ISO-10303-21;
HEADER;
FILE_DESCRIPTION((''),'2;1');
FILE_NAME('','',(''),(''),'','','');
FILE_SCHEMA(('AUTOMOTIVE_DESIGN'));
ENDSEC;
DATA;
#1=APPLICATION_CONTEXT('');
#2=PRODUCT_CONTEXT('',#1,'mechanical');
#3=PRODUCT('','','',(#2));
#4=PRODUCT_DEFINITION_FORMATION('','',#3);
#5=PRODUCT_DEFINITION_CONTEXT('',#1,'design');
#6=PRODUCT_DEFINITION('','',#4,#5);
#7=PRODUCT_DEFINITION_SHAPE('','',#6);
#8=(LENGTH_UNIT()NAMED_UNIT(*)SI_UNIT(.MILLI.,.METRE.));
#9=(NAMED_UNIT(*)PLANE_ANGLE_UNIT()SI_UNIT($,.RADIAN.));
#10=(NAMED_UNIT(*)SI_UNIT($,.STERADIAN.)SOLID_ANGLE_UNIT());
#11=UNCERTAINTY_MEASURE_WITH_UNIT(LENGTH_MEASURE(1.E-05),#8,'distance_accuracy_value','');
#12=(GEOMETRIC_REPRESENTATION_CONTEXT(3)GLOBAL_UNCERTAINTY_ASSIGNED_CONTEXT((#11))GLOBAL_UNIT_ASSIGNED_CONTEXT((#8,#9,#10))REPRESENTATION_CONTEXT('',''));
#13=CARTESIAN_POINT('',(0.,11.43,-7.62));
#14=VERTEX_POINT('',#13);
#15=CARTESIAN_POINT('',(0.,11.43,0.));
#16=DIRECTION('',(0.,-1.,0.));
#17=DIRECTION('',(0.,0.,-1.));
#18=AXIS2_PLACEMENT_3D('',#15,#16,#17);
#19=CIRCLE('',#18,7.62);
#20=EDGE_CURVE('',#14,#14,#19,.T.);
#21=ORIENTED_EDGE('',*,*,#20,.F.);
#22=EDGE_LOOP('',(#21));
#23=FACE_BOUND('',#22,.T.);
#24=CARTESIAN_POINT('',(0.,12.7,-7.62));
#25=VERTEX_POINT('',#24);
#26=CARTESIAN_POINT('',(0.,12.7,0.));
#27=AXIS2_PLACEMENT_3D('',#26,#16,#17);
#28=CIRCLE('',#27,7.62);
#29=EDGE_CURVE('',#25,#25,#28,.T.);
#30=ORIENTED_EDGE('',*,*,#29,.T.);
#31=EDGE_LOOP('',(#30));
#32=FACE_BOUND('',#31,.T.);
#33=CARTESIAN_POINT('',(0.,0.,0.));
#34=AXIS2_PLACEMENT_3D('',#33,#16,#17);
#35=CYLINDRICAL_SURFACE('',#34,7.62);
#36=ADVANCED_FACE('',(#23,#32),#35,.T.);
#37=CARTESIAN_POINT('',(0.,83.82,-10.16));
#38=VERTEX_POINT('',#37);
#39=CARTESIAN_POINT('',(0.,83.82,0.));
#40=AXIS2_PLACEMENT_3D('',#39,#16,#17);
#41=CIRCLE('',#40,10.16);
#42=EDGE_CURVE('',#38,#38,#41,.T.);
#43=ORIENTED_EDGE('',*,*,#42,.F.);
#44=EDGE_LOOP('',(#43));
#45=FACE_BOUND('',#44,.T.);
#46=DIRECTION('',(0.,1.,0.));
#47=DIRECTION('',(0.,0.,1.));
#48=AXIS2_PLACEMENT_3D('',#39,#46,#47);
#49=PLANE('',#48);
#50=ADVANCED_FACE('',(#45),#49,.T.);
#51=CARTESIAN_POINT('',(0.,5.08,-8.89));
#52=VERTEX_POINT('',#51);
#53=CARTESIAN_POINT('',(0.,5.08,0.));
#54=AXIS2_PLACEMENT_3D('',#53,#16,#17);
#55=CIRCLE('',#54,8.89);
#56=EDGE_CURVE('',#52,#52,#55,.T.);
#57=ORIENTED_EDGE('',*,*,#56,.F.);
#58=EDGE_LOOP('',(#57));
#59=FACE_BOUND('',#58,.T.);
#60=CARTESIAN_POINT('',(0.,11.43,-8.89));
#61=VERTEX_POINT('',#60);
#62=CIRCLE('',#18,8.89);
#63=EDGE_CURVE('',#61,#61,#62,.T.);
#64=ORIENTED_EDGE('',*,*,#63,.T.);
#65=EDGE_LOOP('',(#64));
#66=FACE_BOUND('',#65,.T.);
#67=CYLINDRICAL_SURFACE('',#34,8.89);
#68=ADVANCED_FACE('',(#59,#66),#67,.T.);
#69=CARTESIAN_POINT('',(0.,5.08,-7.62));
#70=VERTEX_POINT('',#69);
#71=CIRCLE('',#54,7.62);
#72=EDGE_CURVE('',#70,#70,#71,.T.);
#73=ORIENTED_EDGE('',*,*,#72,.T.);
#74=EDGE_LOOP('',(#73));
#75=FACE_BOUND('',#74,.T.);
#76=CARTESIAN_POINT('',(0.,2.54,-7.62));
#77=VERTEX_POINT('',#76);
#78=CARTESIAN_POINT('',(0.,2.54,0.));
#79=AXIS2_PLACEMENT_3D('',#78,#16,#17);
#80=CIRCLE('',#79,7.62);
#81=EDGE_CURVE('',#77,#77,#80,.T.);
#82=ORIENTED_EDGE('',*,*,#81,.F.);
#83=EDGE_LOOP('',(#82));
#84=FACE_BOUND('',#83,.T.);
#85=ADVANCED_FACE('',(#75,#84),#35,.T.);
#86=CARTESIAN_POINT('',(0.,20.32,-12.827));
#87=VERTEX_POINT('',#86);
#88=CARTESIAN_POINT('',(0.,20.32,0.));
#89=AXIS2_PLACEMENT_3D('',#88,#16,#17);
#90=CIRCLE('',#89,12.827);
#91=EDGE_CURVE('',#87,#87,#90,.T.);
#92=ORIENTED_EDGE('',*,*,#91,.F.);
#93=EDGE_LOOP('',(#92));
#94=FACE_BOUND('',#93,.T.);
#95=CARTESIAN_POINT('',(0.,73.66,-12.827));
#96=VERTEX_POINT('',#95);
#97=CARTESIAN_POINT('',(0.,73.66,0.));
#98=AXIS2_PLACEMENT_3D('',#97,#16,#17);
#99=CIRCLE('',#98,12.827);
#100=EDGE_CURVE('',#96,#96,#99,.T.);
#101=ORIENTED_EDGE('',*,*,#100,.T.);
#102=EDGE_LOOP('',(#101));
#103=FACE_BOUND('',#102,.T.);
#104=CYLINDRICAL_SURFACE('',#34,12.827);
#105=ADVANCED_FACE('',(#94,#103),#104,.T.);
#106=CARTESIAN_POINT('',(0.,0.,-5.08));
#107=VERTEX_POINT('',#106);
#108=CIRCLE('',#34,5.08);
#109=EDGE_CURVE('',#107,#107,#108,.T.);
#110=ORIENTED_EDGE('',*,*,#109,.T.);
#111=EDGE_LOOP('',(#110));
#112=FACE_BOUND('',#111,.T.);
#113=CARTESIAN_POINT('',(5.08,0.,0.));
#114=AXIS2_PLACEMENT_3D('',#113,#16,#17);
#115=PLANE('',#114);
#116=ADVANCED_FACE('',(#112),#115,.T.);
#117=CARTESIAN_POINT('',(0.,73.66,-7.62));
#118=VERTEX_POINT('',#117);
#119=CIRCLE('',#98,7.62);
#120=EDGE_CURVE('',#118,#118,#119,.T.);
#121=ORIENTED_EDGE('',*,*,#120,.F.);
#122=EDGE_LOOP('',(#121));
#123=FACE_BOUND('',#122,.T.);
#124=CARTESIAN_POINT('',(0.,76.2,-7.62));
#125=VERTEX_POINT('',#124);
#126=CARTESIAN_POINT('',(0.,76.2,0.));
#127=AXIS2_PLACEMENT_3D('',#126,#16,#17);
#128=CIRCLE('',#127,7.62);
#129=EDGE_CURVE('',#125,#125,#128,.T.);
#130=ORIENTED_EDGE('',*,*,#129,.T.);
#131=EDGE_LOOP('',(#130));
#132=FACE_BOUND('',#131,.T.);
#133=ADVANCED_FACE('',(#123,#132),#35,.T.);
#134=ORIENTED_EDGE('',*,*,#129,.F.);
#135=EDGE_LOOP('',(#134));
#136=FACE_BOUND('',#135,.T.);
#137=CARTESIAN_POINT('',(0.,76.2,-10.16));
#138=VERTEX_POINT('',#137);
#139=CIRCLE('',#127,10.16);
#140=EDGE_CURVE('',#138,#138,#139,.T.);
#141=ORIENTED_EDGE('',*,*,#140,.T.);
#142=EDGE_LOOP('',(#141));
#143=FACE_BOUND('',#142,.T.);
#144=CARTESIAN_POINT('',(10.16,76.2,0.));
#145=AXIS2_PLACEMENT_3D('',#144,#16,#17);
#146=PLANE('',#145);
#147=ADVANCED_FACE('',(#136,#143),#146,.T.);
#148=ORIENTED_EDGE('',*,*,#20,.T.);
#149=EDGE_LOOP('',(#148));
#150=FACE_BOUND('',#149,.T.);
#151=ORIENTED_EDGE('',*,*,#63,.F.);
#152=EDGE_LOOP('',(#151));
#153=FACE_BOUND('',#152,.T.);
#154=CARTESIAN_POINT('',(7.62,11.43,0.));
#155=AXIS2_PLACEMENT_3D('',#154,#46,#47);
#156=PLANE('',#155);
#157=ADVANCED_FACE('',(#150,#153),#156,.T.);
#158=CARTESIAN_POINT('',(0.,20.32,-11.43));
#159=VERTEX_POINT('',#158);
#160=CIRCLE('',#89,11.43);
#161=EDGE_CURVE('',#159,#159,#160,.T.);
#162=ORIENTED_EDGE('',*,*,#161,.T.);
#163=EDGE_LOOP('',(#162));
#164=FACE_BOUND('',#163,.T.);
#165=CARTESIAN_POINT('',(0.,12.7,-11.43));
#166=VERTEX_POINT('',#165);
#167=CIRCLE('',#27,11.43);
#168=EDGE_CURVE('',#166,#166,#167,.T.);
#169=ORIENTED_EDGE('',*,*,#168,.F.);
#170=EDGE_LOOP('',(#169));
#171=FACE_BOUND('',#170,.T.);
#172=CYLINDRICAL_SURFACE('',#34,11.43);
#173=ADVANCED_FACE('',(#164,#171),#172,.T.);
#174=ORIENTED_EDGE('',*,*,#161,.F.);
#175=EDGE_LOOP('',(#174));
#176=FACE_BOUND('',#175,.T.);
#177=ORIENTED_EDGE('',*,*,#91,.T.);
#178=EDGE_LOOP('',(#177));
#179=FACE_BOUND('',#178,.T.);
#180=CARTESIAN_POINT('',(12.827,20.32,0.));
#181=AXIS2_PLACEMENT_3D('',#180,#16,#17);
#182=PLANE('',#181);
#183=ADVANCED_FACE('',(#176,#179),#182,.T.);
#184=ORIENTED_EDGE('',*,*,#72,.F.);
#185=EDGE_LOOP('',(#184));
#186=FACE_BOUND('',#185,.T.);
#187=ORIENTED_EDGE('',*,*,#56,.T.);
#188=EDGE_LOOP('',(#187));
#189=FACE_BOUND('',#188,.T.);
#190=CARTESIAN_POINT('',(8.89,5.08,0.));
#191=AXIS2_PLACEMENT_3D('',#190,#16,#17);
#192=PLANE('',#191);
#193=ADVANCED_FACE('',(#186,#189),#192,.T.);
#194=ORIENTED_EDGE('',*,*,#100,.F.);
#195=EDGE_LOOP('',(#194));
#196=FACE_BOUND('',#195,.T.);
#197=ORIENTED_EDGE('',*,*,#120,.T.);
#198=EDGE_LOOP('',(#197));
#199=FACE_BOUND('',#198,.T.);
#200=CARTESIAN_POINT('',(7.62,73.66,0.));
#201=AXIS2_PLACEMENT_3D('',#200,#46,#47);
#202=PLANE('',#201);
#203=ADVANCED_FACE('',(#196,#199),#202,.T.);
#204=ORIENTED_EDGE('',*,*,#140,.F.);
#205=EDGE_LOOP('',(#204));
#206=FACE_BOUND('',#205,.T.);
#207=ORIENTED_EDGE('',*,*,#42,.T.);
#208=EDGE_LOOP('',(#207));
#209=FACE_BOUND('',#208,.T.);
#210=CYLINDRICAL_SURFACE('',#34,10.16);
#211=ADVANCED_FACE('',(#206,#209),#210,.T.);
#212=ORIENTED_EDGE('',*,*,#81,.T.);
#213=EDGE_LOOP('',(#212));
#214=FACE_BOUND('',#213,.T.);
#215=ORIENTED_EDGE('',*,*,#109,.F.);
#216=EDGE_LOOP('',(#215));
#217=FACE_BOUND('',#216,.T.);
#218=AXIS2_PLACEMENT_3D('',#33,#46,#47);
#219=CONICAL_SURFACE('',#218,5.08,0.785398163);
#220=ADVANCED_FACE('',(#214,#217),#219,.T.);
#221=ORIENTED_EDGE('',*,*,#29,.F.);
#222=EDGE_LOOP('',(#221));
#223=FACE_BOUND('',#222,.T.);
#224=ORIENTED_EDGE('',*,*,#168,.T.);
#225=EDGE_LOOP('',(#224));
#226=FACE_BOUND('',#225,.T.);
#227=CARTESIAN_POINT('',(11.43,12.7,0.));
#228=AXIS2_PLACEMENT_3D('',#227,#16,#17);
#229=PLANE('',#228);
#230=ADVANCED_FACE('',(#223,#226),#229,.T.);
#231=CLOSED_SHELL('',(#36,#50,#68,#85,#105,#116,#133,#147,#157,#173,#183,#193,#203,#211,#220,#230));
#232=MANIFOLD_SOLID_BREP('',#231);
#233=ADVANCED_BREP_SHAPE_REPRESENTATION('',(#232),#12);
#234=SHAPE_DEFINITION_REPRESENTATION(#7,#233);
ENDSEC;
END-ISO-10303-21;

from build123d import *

# Parameters (mm, degrees)
CHAMFER1_SIZE = 2.54


with BuildPart() as part:
    # Sketch1 → Revolve1 (revolve)
    with BuildSketch(Plane.XY, mode=Mode.PRIVATE) as revolve1_sk:
        Polygon((12.827, 73.66), (12.827, 20.32), (11.43, 20.32), (11.43, 12.7), (7.62, 12.7), (7.62, 11.43), (8.89, 11.43), (8.89, 5.08), (7.62, 5.08), (7.62, 2.54), (5.08, 2.54), (5.08, 0), (0, 0), (0, 83.82), (10.16, 83.82), (10.16, 76.2), (7.62, 76.2), (7.62, 73.66), align=None)
    revolve(revolve1_sk.sketch.rotate(Axis((0, 0, 0), (0, 1, 0)), 90), axis=Axis((0, 0, 0), (0, 1, 0)))

    # Chamfer1
    chamfer1_edges = [part.edges().sort_by_distance(p)[0] for p in [
        (0, 2.54, 5.08),
    ]]
    chamfer(chamfer1_edges, length=CHAMFER1_SIZE - 0.0001)  # a hair under: the kernel refuses the full size


solid = part.part
